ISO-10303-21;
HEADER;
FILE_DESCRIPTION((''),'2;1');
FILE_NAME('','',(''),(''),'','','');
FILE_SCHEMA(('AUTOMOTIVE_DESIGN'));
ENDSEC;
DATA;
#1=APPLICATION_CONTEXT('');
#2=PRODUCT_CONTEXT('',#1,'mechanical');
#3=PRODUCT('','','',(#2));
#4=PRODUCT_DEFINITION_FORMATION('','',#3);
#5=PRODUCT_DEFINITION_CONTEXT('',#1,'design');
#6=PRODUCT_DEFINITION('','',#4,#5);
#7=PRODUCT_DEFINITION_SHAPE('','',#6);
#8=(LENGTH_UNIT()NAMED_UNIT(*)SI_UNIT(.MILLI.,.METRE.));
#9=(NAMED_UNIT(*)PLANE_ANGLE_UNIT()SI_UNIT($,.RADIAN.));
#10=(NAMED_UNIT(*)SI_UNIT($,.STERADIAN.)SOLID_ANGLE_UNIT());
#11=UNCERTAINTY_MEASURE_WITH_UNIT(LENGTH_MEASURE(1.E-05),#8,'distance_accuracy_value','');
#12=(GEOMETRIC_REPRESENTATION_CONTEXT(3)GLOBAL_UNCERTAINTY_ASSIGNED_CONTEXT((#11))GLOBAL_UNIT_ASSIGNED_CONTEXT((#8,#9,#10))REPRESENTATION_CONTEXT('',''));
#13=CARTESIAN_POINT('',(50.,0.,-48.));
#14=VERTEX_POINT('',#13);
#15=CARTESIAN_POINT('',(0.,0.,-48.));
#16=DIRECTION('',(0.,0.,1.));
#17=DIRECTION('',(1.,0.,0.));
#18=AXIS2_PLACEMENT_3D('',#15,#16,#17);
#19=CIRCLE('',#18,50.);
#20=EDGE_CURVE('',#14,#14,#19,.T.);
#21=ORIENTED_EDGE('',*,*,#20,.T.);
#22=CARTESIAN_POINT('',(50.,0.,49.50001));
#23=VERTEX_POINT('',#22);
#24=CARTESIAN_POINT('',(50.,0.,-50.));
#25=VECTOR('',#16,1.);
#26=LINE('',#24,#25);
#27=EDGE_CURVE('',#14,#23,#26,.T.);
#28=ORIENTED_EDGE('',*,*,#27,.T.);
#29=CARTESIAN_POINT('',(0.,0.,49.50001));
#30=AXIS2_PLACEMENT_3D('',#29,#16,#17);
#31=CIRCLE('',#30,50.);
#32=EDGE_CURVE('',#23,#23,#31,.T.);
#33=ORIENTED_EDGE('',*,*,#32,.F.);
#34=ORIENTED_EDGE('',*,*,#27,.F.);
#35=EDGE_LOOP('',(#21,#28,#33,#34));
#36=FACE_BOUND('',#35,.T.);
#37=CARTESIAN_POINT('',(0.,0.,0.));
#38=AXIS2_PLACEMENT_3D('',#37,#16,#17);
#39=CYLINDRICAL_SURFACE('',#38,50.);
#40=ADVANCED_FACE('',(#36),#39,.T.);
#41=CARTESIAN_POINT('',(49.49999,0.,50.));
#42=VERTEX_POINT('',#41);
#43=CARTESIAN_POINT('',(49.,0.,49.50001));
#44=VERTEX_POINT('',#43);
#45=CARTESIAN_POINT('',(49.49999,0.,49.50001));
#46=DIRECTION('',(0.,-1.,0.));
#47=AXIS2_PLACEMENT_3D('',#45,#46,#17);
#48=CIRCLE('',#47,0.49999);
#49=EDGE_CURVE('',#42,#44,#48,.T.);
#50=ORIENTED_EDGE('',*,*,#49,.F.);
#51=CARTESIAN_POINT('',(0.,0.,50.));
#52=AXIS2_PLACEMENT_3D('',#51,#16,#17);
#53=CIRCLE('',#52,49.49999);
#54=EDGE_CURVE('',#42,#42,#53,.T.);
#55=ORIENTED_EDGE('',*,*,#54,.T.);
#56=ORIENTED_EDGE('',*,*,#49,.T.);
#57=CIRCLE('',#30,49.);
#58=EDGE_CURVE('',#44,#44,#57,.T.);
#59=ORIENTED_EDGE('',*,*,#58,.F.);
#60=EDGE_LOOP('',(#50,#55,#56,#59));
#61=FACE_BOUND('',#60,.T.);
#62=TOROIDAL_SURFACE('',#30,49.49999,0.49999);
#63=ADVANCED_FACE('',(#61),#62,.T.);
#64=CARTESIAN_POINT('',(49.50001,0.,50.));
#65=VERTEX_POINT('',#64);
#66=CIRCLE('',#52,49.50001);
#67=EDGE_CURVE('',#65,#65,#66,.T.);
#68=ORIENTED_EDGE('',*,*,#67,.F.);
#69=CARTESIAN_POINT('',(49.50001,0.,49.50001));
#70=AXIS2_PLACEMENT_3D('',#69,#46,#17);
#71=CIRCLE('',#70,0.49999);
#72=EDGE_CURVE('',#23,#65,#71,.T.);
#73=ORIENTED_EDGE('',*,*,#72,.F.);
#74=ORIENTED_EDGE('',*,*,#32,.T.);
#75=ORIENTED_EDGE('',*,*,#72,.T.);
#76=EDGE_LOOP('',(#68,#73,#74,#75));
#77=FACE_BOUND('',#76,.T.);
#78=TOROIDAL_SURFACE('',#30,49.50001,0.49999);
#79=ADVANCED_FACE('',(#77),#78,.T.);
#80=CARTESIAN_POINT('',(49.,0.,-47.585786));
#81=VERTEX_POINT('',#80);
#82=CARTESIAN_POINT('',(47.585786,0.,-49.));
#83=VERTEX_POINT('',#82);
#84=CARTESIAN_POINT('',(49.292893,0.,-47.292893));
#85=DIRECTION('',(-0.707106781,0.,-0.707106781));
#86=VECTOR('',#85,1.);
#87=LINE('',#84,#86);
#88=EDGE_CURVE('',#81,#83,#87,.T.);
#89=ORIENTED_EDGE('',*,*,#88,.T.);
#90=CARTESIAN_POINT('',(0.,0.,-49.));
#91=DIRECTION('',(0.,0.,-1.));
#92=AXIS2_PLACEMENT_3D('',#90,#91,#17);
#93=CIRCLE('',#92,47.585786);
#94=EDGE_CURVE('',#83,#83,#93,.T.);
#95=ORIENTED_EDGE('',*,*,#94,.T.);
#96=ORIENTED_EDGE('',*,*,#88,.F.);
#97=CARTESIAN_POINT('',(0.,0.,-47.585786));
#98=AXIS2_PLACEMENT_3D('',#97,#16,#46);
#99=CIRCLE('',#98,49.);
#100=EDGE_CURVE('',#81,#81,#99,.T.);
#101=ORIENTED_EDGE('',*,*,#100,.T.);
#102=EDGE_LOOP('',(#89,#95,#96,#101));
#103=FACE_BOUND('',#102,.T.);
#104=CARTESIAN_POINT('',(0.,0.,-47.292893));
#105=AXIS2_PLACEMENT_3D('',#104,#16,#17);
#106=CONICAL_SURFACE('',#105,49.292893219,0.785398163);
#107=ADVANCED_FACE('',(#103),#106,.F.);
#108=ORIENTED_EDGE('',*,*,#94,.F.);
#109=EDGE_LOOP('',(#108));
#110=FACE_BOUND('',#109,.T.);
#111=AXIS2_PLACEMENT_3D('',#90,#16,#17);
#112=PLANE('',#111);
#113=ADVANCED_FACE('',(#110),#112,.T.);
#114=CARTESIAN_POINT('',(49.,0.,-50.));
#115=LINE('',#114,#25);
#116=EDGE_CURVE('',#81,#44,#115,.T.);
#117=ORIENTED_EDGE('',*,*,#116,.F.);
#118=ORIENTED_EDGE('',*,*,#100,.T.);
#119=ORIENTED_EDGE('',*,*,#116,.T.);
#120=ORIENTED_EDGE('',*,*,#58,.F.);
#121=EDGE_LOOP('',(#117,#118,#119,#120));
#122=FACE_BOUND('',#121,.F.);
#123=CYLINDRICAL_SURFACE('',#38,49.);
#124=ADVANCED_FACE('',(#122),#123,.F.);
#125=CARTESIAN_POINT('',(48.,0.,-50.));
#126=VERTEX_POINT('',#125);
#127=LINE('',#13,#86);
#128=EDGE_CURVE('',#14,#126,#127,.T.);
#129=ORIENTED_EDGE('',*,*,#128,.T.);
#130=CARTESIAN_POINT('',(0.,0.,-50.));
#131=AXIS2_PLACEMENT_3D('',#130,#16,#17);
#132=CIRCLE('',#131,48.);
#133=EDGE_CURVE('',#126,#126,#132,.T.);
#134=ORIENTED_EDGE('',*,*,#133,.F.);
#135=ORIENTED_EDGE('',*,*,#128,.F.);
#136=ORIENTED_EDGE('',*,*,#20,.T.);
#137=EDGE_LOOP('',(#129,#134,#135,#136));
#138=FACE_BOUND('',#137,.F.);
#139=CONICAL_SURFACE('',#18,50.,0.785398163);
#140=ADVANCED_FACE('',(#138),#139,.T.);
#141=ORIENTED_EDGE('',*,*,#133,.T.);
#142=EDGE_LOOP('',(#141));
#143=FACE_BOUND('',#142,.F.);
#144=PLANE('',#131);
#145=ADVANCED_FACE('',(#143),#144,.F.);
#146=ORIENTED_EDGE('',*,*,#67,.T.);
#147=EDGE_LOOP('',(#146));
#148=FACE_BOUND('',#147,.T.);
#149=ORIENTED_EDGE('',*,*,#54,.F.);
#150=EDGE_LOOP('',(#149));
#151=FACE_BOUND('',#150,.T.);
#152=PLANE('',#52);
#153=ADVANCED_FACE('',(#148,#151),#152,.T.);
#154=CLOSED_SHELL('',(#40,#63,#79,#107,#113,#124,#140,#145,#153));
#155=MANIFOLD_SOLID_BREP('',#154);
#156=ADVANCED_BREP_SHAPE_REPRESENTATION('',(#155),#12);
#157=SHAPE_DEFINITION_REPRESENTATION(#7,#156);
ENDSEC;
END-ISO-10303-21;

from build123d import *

# Parameters (mm, degrees)
F0_R     = 50
F1_DEPTH = 50
F2_DEPTH = 50
F3_SIZE  = 2
F4_T     = -1
F5_R     = 0.49999


# Not quite as in the source:
# - a fillet or chamfer is up to 0.001 mm smaller than in the source, because OpenCascade refuses the exact size


with BuildPart() as f1:
    # F0 (on Top) → F1 (new body)
    with BuildSketch(Plane.XY):
        Circle(F0_R)
    extrude(amount=F1_DEPTH)

    # F2 (add): a face of the model
    f2_faces = [f1.faces().sort_by_distance(p)[0] for p in [
        (0, 0, 0),
    ]]
    extrude(f2_faces, amount=F2_DEPTH)

    # F3
    f3_edges = [f1.edges().sort_by_distance(p)[0] for p in [
        (-50, 0, -50),
    ]]
    chamfer(f3_edges, length=F3_SIZE)

    # F4
    f4_openings = [f1.faces().sort_by_distance(p)[0] for p in [
        (0, 0, 50),
    ]]
    offset(amount=F4_T, openings=f4_openings)

    # F5 (radius 0.5 in the source; OpenCascade refuses exactly that, so slightly less here)
    f5_edges = [f1.edges().sort_by_distance(p)[0] for p in [
        (-50, 0, 50),
        (-49, 0, 50),
    ]]
    fillet(f5_edges, radius=F5_R)


solid = f1.part
